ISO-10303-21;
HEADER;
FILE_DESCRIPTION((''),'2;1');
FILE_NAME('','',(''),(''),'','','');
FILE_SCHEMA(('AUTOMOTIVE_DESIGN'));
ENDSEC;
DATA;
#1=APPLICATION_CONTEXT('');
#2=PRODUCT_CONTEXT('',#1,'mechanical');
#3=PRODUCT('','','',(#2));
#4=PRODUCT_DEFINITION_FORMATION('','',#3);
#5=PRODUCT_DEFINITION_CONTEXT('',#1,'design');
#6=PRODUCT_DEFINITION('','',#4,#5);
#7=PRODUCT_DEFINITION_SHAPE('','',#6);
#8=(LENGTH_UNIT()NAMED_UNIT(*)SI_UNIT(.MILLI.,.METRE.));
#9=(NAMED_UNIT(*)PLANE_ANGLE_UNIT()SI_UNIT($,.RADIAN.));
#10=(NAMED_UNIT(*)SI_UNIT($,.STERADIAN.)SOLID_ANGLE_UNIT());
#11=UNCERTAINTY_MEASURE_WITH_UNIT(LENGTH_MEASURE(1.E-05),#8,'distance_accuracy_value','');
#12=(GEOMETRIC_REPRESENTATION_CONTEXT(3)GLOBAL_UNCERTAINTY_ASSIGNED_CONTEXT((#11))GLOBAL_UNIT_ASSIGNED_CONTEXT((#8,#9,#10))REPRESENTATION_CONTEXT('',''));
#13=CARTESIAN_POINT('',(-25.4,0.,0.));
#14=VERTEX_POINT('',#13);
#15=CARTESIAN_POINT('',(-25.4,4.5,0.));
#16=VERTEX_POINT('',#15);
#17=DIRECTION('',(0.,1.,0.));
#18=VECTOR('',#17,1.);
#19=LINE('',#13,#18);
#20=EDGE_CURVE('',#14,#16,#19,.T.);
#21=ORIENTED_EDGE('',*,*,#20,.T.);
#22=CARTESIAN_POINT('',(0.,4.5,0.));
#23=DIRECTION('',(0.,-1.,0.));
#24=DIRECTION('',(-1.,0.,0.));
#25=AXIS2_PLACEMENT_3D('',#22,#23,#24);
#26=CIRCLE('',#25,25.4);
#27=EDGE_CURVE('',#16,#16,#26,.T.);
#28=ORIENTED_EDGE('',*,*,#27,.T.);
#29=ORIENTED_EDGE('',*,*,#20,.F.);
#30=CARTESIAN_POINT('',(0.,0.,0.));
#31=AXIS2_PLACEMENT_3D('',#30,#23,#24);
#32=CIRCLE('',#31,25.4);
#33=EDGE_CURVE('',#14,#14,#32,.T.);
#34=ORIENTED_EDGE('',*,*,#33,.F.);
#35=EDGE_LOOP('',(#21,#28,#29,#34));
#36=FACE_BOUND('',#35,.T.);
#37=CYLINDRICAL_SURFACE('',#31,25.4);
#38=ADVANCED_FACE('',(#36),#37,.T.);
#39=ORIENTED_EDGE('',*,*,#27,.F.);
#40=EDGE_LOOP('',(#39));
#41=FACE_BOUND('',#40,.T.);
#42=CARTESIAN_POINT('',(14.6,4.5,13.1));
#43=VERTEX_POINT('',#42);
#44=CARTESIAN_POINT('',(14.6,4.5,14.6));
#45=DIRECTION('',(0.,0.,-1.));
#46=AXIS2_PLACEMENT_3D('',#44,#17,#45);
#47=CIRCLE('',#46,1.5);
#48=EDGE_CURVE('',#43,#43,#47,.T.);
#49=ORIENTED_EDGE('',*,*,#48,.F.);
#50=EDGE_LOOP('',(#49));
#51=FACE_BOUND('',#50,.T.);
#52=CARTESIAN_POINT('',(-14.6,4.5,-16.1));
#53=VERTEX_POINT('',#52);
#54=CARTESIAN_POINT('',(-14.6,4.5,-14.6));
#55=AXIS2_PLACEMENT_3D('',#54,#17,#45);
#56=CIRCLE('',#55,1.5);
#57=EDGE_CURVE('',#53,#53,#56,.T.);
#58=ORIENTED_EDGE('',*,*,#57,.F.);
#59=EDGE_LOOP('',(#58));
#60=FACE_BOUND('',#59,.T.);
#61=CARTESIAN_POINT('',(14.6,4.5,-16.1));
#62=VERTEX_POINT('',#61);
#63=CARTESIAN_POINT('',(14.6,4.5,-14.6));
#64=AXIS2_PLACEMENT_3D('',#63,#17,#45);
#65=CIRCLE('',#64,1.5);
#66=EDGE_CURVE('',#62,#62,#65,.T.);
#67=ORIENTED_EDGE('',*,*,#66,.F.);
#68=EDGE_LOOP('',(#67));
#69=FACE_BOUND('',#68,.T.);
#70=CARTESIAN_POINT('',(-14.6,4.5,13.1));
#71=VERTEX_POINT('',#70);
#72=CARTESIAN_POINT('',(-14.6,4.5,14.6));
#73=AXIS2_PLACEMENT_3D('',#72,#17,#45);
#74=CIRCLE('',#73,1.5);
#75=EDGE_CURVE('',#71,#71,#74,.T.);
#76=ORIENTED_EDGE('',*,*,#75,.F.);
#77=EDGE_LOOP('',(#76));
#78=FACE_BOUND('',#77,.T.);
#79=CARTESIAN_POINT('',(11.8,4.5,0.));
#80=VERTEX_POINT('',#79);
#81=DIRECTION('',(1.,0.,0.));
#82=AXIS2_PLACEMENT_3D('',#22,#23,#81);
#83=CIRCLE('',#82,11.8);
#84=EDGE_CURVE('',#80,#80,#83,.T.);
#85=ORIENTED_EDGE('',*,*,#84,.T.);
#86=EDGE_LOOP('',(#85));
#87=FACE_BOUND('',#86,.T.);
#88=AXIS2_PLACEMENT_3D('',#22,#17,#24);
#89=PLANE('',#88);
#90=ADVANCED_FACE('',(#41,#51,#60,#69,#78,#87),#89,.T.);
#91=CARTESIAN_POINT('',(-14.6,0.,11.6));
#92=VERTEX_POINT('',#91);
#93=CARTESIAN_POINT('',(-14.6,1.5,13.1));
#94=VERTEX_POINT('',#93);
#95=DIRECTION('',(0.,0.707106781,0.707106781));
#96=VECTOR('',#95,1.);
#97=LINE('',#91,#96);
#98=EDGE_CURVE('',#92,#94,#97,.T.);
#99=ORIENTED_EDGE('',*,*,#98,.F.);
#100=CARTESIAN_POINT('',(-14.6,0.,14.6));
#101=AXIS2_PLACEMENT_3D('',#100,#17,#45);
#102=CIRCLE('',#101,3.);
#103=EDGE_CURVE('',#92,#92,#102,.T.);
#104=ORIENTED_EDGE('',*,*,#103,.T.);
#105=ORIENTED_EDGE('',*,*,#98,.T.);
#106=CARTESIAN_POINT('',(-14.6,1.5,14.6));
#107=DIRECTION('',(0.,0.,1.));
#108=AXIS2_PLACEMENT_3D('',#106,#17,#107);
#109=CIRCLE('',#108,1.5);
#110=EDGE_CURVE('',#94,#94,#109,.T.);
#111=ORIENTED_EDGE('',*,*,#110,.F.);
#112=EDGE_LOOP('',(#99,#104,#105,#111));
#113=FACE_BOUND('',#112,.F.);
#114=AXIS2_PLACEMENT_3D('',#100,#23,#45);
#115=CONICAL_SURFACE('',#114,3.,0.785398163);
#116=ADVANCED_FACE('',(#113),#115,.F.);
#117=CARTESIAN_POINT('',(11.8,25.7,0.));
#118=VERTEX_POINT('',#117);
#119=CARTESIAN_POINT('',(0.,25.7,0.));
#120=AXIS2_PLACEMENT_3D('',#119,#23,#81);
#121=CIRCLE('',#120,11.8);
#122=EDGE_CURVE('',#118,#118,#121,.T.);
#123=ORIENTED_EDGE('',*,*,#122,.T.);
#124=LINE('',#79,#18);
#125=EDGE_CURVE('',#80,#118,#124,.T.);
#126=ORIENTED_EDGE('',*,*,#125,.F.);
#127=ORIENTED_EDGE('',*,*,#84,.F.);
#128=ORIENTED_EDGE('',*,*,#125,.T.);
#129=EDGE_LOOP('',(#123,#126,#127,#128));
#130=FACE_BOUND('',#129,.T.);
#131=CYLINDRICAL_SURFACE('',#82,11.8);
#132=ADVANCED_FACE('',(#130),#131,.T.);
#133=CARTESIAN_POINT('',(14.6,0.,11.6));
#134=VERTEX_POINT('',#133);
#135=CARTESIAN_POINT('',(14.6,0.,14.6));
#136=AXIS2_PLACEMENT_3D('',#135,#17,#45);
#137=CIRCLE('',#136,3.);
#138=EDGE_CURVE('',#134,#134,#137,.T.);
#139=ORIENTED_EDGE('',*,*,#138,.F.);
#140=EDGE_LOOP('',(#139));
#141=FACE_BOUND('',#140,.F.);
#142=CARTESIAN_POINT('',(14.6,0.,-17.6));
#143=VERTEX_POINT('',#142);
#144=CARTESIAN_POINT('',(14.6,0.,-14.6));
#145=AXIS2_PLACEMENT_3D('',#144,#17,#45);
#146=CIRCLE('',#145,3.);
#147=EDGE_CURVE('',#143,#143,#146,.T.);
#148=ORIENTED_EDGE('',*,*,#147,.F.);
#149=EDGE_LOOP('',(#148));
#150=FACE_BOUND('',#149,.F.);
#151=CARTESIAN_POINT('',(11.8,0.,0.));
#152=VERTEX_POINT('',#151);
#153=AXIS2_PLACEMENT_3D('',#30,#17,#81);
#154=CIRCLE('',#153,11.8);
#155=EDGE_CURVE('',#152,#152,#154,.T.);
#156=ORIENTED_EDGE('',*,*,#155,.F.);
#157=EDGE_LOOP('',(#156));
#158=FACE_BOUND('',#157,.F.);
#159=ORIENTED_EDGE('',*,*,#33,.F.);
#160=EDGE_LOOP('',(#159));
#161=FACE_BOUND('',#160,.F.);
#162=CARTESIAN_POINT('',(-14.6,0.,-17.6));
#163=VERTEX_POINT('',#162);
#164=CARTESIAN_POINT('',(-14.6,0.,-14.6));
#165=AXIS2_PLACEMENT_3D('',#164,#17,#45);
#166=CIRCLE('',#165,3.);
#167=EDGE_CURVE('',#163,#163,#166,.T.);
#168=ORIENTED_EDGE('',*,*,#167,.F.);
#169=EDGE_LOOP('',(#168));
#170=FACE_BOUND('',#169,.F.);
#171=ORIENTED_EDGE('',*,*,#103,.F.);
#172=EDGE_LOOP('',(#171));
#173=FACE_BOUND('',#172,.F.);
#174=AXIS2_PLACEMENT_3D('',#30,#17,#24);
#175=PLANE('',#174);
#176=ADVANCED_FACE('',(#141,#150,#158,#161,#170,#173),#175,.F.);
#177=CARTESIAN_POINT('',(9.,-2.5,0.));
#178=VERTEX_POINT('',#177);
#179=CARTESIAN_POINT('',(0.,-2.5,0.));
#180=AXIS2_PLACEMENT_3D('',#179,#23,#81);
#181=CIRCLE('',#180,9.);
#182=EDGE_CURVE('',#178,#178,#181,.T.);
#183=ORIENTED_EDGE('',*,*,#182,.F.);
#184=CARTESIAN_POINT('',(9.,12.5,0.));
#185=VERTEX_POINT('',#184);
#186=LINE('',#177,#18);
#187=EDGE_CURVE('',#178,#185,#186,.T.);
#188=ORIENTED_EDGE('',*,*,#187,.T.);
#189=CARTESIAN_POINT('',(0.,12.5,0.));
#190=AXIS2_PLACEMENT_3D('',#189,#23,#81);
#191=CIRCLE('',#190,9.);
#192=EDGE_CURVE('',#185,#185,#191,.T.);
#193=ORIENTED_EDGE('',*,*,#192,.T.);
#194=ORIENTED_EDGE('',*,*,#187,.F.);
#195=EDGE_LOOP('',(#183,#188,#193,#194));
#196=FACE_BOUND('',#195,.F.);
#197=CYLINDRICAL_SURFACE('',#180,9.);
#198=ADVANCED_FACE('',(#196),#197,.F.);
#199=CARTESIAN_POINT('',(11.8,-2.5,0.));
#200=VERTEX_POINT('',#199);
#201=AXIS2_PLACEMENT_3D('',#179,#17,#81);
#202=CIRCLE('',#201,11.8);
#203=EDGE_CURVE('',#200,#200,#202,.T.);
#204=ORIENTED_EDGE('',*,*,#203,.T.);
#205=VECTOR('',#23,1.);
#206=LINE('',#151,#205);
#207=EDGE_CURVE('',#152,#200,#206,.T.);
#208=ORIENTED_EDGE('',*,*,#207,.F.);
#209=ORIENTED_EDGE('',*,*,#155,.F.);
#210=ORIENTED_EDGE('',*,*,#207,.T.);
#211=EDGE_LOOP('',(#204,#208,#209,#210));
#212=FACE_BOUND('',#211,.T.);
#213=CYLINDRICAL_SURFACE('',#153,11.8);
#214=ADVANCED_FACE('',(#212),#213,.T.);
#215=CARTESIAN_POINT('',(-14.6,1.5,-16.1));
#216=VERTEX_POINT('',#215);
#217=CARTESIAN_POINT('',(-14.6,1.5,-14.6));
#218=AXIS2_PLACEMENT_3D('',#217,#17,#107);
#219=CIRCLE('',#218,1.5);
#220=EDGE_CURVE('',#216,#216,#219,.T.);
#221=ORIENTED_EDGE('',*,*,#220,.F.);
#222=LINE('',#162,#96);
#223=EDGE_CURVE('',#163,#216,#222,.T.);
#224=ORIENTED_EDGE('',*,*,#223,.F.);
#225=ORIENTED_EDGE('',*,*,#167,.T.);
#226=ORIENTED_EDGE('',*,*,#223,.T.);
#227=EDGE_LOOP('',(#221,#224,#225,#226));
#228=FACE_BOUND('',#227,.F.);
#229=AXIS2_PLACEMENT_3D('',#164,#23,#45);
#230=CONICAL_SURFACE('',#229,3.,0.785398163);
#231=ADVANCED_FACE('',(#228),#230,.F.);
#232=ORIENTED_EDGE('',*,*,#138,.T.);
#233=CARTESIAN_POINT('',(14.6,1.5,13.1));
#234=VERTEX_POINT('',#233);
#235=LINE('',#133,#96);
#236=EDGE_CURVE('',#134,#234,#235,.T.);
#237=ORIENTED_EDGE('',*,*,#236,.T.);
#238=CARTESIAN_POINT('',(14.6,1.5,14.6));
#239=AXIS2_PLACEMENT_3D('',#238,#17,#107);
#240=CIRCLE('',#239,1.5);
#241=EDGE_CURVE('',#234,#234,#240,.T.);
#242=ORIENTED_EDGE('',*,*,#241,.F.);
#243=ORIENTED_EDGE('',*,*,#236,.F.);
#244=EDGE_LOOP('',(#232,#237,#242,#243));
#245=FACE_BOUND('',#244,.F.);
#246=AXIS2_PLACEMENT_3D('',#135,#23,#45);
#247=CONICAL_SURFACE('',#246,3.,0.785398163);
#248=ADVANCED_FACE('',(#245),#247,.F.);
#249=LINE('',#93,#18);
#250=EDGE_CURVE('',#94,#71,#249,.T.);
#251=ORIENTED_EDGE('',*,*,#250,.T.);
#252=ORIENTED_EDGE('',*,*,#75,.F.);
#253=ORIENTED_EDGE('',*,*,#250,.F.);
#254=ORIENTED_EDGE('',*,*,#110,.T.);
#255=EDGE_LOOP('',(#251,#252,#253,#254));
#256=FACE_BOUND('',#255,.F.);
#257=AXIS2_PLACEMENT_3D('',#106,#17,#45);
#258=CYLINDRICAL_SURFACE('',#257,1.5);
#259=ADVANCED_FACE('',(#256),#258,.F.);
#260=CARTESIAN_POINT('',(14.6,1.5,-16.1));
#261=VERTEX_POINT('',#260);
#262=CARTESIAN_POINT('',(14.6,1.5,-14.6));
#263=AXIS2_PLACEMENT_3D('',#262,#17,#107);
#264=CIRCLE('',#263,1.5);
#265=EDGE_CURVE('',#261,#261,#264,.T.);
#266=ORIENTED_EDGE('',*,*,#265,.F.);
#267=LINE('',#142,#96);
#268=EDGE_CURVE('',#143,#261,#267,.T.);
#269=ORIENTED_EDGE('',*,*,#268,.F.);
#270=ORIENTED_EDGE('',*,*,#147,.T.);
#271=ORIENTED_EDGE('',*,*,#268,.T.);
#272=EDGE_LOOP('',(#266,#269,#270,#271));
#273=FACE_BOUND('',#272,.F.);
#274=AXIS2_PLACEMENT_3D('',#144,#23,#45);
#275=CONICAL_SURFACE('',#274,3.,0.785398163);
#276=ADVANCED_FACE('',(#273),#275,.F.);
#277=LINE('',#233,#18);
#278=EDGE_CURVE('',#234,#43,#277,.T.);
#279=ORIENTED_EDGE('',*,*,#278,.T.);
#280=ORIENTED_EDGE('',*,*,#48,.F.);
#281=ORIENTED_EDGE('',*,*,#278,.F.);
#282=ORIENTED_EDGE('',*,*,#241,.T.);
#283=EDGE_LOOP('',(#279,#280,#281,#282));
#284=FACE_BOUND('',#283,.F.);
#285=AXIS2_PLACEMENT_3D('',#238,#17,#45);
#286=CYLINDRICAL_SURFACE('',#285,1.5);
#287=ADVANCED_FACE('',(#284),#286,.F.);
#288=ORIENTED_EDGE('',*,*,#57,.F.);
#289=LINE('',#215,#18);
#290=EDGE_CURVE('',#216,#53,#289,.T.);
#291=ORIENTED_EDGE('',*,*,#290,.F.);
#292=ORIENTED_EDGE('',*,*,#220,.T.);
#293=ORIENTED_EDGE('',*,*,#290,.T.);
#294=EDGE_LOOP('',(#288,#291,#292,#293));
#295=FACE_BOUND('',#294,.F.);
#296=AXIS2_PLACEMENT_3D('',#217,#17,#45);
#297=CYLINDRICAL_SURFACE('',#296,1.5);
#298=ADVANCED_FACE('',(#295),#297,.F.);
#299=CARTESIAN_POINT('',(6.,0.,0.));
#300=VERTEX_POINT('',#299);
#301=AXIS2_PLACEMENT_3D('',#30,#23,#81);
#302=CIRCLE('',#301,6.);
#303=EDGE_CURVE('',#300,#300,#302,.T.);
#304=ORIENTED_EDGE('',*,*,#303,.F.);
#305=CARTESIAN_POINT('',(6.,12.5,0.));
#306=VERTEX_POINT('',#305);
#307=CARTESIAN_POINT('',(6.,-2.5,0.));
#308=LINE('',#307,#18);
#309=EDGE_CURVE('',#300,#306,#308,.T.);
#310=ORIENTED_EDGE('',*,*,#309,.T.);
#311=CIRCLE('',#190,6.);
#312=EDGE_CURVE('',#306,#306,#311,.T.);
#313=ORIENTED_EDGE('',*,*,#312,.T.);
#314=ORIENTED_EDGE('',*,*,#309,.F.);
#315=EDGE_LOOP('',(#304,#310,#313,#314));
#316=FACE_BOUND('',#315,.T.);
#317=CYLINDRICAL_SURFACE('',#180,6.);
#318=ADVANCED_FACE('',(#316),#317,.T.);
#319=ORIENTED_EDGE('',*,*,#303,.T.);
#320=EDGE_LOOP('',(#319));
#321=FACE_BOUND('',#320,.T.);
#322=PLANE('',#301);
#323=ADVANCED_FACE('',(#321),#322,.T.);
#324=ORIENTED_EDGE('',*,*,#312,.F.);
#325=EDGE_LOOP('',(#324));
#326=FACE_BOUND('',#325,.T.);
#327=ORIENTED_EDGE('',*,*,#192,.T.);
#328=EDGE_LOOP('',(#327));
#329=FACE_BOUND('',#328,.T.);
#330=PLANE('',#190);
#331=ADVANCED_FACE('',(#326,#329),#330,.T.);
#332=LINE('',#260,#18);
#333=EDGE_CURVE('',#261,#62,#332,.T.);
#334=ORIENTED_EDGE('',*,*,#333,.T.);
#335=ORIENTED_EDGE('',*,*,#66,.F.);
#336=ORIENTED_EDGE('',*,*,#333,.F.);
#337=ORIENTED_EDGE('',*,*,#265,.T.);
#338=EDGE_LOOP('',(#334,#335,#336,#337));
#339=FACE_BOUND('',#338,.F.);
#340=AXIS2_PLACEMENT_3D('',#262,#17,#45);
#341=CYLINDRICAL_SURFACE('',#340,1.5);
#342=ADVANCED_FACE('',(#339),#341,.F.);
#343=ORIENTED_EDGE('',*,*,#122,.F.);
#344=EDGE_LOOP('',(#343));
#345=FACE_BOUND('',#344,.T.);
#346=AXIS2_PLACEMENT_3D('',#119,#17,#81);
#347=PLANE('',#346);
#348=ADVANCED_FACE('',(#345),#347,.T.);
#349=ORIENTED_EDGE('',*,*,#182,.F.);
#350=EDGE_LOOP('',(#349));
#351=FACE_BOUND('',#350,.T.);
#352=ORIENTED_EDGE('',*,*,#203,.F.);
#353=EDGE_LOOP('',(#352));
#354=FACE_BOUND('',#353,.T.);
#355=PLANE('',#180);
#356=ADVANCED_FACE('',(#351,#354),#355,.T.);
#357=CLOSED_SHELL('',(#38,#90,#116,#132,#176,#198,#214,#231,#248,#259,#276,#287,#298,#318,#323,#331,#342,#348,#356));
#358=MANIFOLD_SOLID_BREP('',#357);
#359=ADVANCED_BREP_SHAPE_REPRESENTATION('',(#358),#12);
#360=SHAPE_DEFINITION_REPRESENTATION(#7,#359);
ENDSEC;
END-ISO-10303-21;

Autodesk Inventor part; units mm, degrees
ref_plane "YZ Plane" through (0, 0, 0) normal (1, 0, 0) x (0, 1, 0)
ref_plane "XZ Plane" through (0, 0, 0) normal (0, 1, 0) x (-1, 0, 0)
ref_plane "XY Plane" through (0, 0, 0) normal (0, 0, 1) x (1, 0, 0)
sketch "Skizze1" plane through (0, 0, 0) normal (0, 1, 0) x (-1, 0, 0)
  circle A0 centre (0, 0) radius 25.4
  dimension "d0" = 50.8
extrude "Extrusion1" add sketch "Skizze1" along normal blind 4.5
sketch "Skizze2" plane through (0, 0, 0) normal (0, -1, 0) x (1, 0, 0)
  circle A0 centre (0, 0) radius 25.4 projected
  line L0 (-14.6, 14.6) -> (14.6, 14.6) construction
  line L1 (14.6, 14.6) -> (14.6, -14.6) construction
  line L2 (14.6, -14.6) -> (-14.6, -14.6) construction
  line L3 (-14.6, -14.6) -> (-14.6, 14.6) construction
  line L4 (0, 0) -> (14.6, 0) construction
  line L5 (0, 0) -> (0, 14.6) construction
  dimension "d3" = 29.2
  dimension "d4" = 29.2
hole "Bohrung1" at (-14.6, 0, 14.6) at (14.6, 0, 14.6) at (14.6, 0, -14.6) at (-14.6, 0, -14.6) direction (0, 1, 0) diameter 3 end through all countersink diameter 6 countersink angle 90
sketch "Skizze3" plane through (0, 0, 0) normal (0, -1, 0) x (1, 0, 0)
  circle A0 centre (0, 0) radius 25.4 projected
  circle A1 centre (0, 0) radius 11.8
  dimension "d12" = 23.6
extrude "Extrusion2" add sketch "Skizze3" along normal blind 2.5 contours A1
sketch "Skizze4" plane through (0, 4.5, 0) normal (0, 1, 0) x (1, 0, 0)
  circle A0 centre (0, 0) radius 25.4 projected
  circle A1 centre (0, 0) radius 25.4 projected
  circle A2 centre (0, 0) radius 11.8
  dimension "d15" = 23.6
extrude "Extrusion3" add sketch "Skizze4" along normal blind 21.2 contours A2
sketch "Skizze5" plane through (0, -2.5, 0) normal (0, -1, 0) x (1, 0, 0)
  circle A0 centre (0, 0) radius 11.8 projected
  circle A1 centre (0, 0) radius 9
  circle A2 centre (0, 0) radius 6
  dimension "d18" = 18
  dimension "d19" = 12
extrude "Extrusion4" cut sketch "Skizze5" against normal blind 15 contours A1
move faces "Verschieben1" translate (0, 2.5, 0) faces at (-0.7092, -2.5, 1.4219)
properties part number "anschluss_strom"
